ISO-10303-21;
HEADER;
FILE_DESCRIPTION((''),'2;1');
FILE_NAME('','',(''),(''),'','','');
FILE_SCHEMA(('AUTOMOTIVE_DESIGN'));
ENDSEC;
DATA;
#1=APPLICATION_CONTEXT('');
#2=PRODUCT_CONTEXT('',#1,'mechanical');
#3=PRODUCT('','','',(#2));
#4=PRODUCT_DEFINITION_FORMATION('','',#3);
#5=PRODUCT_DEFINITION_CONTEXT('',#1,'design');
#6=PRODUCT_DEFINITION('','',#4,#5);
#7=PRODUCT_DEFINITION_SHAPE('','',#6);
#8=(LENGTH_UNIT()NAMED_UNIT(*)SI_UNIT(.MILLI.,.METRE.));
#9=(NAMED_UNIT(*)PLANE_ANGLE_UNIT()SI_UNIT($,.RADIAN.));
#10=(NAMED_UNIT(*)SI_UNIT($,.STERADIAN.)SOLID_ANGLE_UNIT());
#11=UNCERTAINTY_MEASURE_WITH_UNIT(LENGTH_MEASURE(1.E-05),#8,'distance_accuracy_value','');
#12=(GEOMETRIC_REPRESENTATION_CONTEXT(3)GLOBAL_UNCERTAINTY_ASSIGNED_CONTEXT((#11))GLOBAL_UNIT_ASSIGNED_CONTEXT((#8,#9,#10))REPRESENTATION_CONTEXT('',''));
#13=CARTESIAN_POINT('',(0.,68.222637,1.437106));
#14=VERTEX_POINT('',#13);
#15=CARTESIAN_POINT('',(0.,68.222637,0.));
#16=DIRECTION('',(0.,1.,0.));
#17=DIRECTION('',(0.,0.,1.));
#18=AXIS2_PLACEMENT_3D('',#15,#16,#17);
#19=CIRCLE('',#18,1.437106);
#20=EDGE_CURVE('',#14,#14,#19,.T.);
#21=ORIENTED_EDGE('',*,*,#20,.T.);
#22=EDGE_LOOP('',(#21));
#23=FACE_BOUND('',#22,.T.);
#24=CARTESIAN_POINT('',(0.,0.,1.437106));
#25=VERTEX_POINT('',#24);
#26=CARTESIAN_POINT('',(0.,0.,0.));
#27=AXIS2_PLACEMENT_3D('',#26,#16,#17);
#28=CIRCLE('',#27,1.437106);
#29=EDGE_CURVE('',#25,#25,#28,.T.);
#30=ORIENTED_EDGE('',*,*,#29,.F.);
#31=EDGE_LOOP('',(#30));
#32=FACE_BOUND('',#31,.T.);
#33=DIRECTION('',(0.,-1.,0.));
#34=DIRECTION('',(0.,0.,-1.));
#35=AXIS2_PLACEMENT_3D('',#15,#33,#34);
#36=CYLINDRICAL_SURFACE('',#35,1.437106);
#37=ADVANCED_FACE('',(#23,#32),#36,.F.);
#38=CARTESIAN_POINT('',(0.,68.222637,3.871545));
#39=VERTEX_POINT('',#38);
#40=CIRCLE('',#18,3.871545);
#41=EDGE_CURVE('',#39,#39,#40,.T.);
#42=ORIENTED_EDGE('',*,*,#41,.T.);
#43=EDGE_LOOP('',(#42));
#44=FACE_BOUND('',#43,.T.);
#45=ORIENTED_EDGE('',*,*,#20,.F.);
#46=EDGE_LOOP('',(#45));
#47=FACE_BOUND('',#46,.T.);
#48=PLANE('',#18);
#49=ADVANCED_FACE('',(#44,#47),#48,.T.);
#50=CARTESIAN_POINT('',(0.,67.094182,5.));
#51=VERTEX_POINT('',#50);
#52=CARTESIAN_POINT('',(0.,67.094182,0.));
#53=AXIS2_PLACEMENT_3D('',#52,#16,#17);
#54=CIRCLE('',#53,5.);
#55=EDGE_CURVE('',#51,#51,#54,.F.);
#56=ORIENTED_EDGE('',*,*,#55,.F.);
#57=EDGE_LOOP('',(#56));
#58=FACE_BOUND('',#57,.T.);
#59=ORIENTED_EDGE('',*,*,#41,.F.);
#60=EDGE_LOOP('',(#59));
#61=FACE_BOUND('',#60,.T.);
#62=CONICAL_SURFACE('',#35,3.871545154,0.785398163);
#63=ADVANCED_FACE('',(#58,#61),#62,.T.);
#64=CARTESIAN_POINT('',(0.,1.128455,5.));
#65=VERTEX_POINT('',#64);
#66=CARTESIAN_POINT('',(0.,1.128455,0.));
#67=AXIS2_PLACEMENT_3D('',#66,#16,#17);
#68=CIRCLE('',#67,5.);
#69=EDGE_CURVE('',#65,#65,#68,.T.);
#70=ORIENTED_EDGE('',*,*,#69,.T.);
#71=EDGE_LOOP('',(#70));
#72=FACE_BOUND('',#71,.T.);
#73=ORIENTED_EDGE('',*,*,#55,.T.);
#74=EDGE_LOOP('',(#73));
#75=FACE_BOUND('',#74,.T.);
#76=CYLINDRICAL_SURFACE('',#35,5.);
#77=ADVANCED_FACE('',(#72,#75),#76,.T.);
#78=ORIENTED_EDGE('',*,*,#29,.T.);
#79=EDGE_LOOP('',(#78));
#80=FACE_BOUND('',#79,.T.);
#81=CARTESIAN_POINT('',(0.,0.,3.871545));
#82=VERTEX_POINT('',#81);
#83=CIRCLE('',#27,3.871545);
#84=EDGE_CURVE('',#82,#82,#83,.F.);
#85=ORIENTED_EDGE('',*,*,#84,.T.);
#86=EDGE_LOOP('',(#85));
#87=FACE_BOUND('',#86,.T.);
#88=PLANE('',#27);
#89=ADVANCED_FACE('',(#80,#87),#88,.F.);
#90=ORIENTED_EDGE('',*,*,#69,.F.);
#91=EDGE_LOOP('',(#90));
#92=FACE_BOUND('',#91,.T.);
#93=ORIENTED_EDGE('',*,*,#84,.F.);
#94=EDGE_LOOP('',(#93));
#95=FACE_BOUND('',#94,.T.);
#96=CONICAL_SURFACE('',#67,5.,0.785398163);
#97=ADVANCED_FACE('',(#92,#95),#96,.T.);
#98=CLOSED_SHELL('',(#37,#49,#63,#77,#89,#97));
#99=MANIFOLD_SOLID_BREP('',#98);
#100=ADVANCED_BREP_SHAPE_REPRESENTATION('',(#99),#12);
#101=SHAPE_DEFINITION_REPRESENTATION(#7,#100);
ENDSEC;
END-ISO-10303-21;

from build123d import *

# Parameters (mm, degrees)
SKETCH1_R           = 5
BOSS_EXTRUDE1_DEPTH = 68.22263724
SKETCH2_R           = 1.437105979
CUT_EXTRUDE1_DEPTH  = 69.588105616
CHAMFER1_SIZE       = 1.128454846


with BuildPart() as part:
    # Sketch1 → Boss-Extrude1 (new body)
    with BuildSketch(Plane(origin=(0, 0, 0), x_dir=(1, 0, 0), z_dir=(0, 1, 0))):
        Circle(SKETCH1_R)
    extrude(amount=BOSS_EXTRUDE1_DEPTH)

    # Sketch2 → Cut-Extrude1 (cut, through all)
    with BuildSketch(Plane(origin=(0, 0, 0), x_dir=(1, 0, 0), z_dir=(0, 1, 0))):
        Circle(SKETCH2_R)
    extrude(amount=CUT_EXTRUDE1_DEPTH, mode=Mode.SUBTRACT)

    # Chamfer1
    chamfer1_edges = [part.edges().sort_by_distance(p)[0] for p in [
        (-5, 68.22263724, 0),
        (-5, 0, 0),
    ]]
    chamfer(chamfer1_edges, length=CHAMFER1_SIZE)


solid = part.part
